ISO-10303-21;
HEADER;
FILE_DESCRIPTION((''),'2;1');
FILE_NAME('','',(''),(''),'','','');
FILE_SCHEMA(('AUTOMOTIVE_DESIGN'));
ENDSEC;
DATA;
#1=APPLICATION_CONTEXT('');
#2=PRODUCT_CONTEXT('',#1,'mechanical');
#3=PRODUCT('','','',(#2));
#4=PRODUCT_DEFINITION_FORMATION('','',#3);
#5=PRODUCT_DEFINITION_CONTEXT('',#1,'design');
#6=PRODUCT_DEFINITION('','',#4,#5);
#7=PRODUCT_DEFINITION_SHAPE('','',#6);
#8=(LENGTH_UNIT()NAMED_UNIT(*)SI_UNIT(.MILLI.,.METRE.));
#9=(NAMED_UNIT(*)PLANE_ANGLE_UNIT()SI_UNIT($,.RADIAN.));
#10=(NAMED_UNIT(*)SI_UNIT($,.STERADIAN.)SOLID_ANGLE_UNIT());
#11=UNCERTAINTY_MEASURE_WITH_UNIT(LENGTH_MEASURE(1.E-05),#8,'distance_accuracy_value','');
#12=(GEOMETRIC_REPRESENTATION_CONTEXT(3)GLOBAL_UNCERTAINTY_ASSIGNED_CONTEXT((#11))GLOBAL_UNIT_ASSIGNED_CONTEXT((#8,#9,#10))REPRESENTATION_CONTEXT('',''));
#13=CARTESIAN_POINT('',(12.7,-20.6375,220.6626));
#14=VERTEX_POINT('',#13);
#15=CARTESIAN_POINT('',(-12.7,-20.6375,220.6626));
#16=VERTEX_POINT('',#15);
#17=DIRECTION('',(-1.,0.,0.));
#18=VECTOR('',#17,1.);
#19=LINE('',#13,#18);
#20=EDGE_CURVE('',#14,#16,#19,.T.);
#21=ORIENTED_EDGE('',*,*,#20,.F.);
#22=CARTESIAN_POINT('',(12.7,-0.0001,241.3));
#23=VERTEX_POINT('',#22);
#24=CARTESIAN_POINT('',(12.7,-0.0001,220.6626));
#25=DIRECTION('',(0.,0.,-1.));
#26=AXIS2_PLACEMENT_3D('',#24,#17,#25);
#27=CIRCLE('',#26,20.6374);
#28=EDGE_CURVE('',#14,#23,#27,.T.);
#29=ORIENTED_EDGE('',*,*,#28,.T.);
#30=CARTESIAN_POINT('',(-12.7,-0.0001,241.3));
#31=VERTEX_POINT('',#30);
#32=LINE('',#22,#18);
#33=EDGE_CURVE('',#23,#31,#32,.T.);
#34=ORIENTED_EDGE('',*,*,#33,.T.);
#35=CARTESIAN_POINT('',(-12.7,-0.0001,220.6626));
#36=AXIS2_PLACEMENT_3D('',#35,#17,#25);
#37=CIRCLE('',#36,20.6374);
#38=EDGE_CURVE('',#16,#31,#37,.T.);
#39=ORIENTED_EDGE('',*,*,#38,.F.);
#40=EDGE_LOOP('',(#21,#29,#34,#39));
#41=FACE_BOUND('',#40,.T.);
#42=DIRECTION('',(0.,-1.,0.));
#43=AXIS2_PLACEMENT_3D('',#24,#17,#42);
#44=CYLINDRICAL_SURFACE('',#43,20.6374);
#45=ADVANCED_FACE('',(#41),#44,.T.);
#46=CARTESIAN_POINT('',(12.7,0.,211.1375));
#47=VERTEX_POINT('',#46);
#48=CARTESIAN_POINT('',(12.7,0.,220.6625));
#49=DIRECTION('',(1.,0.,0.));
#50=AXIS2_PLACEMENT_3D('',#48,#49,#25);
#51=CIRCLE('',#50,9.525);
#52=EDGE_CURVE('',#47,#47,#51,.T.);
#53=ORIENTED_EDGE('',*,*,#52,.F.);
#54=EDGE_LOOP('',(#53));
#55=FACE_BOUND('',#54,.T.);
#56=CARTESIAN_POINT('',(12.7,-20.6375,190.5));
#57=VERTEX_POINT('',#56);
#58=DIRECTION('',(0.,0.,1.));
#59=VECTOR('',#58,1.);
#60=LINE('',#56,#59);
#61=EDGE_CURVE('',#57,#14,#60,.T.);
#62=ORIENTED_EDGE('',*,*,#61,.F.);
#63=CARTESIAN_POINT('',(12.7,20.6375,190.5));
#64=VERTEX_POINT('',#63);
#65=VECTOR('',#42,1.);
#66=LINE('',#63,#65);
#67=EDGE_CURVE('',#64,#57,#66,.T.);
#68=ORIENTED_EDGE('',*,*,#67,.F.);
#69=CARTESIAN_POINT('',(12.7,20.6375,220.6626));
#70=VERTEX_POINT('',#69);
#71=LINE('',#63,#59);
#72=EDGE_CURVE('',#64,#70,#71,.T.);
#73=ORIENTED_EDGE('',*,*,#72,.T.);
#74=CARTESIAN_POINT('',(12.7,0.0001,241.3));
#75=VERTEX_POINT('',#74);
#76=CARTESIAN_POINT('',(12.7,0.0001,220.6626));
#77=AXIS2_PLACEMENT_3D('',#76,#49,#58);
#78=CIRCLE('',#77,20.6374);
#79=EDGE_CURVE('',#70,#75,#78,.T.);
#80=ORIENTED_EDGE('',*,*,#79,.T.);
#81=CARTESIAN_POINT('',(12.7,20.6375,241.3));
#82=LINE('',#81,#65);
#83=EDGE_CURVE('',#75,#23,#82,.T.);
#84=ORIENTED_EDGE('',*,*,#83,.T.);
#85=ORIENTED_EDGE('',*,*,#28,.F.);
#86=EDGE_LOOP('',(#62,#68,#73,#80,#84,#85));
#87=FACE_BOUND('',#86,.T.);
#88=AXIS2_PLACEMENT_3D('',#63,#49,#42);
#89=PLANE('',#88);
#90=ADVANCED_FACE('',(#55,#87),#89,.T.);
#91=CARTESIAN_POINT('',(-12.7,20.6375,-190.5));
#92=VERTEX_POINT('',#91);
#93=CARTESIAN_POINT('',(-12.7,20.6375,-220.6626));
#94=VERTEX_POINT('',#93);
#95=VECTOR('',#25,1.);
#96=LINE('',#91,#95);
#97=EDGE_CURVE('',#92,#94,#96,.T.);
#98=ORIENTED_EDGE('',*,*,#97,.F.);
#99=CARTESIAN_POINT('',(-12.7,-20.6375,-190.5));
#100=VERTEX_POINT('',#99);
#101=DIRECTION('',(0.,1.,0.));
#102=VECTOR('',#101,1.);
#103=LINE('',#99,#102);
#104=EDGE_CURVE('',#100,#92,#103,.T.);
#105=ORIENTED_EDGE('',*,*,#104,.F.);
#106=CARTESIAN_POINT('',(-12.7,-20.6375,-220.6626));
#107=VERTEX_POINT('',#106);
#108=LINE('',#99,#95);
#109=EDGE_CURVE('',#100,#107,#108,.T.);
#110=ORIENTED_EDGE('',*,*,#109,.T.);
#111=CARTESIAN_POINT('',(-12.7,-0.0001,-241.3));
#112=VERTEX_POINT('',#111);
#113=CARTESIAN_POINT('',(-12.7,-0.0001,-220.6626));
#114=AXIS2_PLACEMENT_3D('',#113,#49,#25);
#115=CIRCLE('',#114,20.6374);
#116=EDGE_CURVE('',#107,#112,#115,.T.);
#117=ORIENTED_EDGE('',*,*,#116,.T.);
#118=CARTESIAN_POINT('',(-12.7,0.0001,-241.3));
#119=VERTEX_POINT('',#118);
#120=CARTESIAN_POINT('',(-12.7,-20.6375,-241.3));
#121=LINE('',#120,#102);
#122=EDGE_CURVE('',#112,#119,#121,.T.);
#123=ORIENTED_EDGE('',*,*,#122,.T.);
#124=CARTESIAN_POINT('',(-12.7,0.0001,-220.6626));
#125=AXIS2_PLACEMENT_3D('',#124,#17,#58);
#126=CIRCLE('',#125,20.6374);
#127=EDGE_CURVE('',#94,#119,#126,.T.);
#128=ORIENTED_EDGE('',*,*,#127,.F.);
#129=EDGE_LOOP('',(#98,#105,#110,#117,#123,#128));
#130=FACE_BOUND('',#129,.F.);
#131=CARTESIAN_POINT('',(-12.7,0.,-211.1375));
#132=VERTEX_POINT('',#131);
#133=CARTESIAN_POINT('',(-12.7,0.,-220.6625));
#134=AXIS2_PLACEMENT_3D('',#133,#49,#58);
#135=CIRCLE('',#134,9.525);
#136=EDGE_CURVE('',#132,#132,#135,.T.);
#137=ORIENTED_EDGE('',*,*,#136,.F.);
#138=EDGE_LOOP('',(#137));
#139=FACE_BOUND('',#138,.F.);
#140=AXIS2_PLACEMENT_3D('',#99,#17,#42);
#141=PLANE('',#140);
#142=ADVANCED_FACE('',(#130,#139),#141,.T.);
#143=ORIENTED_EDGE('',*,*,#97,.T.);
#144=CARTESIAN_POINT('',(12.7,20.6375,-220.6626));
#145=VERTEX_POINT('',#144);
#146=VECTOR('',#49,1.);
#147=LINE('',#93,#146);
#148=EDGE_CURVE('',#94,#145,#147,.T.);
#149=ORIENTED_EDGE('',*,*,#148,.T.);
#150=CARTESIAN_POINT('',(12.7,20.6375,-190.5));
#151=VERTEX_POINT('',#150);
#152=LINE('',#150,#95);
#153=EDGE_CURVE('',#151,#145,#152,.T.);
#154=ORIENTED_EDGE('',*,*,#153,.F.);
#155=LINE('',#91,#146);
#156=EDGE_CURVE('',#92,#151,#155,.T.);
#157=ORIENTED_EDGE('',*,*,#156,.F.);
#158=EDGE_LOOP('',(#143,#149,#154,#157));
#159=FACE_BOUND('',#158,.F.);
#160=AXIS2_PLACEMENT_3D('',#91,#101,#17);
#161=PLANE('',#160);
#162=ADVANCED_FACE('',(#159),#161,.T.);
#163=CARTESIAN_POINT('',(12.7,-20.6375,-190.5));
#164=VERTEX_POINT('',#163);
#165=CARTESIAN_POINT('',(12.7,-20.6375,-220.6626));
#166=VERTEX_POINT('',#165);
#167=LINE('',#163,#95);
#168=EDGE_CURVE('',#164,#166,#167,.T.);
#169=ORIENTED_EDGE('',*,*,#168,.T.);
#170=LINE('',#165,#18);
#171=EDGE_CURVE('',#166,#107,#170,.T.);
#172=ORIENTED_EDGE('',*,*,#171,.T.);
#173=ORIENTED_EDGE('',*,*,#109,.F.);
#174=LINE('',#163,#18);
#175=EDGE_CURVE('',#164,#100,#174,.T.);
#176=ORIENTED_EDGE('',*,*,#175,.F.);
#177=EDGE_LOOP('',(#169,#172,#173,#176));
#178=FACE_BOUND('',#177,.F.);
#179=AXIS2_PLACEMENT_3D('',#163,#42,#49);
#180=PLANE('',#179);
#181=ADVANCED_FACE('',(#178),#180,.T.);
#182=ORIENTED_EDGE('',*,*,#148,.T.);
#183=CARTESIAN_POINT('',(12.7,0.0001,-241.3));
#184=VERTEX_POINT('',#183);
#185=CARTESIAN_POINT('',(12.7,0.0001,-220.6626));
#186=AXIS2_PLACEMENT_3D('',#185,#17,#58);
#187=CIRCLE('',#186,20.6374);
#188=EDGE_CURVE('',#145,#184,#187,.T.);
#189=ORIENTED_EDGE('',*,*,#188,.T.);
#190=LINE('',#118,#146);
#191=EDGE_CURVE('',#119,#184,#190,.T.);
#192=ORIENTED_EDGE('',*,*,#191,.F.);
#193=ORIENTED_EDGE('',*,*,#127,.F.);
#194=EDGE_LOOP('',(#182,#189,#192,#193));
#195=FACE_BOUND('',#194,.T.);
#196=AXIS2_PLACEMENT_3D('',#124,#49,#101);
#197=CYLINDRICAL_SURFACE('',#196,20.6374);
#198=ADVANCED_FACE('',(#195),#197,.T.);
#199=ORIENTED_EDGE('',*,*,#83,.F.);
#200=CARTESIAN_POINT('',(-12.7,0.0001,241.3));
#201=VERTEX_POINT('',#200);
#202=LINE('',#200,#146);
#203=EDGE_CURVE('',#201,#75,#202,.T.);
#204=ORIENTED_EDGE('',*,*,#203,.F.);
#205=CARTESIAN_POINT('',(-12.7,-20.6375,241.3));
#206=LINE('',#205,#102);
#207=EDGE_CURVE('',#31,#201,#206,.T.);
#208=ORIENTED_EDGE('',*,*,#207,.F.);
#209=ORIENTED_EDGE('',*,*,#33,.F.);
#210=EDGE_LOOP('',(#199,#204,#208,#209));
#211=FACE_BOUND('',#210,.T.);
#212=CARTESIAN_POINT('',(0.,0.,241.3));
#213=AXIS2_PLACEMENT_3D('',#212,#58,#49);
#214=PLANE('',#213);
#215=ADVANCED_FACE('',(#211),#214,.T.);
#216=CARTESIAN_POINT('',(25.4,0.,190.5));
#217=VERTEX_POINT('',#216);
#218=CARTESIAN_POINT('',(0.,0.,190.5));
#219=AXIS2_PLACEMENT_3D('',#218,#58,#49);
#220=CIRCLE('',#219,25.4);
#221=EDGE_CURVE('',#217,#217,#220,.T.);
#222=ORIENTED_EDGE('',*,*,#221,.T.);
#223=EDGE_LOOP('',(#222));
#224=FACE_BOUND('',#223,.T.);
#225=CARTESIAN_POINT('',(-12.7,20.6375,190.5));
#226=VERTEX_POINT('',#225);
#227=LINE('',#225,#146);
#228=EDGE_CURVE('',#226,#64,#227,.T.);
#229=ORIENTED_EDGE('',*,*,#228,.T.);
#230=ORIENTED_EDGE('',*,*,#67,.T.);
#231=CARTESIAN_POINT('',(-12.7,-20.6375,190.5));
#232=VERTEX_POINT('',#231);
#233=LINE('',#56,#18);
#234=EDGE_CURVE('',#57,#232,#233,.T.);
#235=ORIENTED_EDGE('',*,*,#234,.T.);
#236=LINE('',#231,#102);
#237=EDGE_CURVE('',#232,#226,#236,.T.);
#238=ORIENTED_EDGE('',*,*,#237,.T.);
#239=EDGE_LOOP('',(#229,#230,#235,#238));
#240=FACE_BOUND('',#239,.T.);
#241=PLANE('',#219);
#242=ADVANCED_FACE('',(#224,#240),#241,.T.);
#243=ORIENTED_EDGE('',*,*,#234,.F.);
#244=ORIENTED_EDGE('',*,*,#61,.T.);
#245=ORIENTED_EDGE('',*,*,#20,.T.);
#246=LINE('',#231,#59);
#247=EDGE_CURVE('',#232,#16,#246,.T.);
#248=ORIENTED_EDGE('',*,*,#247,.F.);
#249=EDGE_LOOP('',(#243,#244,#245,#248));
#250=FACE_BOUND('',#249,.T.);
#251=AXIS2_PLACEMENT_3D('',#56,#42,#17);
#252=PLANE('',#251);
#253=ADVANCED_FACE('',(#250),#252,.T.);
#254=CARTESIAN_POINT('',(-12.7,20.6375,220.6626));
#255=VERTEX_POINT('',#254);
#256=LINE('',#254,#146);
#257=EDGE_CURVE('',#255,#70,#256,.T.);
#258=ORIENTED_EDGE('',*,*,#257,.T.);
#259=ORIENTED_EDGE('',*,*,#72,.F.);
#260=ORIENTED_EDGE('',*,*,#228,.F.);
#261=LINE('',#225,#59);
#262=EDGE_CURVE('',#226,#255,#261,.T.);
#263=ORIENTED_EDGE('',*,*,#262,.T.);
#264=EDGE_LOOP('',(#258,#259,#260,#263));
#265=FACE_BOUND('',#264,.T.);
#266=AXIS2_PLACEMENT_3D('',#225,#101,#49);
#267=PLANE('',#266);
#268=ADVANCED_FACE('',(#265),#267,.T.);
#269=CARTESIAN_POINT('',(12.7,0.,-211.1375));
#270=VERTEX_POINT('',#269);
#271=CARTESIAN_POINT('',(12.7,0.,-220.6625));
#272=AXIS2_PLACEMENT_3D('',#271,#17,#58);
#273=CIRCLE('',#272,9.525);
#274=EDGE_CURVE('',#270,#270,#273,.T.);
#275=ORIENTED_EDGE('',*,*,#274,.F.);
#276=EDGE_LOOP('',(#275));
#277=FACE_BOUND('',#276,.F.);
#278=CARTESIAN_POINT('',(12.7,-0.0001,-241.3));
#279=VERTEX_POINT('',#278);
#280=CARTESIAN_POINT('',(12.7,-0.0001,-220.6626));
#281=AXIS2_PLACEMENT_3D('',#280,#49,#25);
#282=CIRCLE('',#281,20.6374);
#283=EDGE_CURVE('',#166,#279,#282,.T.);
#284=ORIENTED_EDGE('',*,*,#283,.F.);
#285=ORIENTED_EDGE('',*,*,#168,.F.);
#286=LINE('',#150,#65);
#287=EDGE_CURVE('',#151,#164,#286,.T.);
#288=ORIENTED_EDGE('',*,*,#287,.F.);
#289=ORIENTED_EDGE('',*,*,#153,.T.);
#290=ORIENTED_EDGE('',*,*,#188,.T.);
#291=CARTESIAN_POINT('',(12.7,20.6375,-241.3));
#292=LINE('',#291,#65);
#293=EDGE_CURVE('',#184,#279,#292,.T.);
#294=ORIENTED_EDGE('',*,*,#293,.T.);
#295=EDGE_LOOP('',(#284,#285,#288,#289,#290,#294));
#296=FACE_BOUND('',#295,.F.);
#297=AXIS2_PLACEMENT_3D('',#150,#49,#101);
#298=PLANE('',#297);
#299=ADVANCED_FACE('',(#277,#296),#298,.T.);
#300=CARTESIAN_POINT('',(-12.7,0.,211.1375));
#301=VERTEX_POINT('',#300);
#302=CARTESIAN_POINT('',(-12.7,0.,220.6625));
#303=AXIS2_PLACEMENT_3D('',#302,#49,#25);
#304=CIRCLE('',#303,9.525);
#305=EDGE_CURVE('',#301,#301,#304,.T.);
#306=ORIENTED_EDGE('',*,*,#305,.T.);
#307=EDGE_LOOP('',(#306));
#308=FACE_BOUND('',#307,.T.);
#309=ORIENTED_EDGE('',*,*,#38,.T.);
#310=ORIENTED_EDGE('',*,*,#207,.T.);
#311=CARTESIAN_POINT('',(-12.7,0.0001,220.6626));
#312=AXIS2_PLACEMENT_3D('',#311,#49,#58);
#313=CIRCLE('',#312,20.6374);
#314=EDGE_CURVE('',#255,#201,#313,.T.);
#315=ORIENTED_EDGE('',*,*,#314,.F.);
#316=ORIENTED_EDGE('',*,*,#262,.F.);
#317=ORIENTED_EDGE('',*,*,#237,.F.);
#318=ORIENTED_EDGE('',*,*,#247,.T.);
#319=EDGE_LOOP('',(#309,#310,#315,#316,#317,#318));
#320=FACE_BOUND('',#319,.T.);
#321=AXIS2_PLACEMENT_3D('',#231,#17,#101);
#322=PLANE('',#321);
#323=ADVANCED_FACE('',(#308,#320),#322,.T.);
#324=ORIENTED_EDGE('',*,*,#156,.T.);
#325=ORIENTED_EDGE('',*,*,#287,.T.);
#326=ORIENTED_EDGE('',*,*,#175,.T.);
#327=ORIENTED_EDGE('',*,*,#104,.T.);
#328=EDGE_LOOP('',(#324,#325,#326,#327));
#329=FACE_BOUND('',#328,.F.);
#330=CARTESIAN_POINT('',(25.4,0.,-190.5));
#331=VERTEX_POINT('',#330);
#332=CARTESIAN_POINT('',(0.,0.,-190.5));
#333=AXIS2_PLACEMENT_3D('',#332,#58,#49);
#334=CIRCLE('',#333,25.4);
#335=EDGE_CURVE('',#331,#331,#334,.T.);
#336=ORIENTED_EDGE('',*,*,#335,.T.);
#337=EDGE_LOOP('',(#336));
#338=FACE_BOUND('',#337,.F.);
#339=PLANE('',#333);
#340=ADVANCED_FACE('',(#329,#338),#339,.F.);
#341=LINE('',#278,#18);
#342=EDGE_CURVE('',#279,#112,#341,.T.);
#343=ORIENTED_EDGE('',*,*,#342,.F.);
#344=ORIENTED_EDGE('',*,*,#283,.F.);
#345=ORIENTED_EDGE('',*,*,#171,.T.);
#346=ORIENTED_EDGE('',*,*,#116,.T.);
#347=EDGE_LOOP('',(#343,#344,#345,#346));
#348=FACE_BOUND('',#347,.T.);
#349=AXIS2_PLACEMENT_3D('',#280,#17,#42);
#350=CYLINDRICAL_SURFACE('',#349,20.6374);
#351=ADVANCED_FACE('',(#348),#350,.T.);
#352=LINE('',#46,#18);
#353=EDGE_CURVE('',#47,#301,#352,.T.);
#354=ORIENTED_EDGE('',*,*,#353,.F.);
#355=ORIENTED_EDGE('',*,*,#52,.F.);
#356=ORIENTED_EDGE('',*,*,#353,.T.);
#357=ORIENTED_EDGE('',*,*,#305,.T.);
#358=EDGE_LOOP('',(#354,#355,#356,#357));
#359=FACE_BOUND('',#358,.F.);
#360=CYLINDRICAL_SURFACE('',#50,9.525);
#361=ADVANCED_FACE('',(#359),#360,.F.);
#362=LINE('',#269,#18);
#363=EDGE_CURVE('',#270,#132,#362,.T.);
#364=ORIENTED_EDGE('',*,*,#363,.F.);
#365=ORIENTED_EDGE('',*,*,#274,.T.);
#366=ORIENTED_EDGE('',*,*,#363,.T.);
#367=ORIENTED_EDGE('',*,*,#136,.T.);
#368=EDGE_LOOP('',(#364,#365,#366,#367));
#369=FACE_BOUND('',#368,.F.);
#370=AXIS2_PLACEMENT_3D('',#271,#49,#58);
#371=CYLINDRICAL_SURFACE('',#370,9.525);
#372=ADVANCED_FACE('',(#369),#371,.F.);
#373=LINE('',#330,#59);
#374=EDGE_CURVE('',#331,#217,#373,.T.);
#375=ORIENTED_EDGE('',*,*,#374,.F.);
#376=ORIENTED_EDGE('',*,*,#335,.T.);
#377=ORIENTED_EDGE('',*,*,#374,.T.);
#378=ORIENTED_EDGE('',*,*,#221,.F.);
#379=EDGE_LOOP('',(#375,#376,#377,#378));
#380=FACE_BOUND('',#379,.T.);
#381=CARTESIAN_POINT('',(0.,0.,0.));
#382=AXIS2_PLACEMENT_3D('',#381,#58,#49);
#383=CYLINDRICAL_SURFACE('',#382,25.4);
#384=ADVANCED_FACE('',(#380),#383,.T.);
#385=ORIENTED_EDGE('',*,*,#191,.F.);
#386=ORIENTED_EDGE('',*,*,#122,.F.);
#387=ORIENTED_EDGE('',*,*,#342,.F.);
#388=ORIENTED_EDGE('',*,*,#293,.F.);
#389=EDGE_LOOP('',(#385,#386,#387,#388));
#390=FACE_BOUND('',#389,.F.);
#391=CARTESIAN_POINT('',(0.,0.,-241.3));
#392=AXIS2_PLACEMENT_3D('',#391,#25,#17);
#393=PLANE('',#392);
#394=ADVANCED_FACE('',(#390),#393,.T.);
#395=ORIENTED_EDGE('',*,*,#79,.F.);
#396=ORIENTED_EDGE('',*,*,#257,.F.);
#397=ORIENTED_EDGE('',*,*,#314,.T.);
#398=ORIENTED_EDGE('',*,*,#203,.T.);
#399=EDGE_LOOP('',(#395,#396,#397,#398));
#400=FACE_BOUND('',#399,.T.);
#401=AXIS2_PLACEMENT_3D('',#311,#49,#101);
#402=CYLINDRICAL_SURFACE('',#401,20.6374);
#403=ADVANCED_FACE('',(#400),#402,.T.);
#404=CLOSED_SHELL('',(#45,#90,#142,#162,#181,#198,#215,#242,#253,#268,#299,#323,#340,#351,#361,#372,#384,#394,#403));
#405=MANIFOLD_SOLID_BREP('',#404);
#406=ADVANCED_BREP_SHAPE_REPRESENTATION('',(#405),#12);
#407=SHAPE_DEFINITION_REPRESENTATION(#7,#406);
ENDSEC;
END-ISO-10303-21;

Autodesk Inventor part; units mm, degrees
ref_plane "YZ Plane" through (0, 0, 0) normal (1, 0, 0) x (0, 1, 0)
ref_plane "XZ Plane" through (0, 0, 0) normal (0, 1, 0) x (-1, 0, 0)
ref_plane "XY Plane" through (0, 0, 0) normal (0, 0, 1) x (1, 0, 0)
sketch "Sketch1" plane through (0, 0, 0) normal (0, 0, 1) x (1, 0, 0)
  circle A0 centre (0, 0) radius 25.4
  dimension "d0" = 50.8
extrude "Extrusion1" add sketch "Sketch1" along normal mid plane 381
sketch "Sketch4" plane through (0, 0, 190.5) normal (0, 0, 1) x (1, 0, 0)
  line L0 (-12.7, 20.6375) -> (12.7, 20.6375)
  line L1 (12.7, 20.6375) -> (12.7, -20.6375)
  line L2 (12.7, -20.6375) -> (-12.7, -20.6375)
  line L3 (-12.7, -20.6375) -> (-12.7, 20.6375)
  line L4 (-12.7, 20.6375) -> (12.7, -20.6375) construction
  line L5 (12.7, 20.6375) -> (-12.7, -20.6375) construction
  point P0 (0, 0)
  dimension "d15" = 25.4
  dimension "d16" = 41.275
extrude "Extrusion4" add sketch "Sketch4" along normal blind 50.8
fillet "Fillet2" radius 20.6375 2 edges at (0, 20.6375, 241.3) (0, -20.6375, 241.3)
sketch "Sketch5" plane through (12.7, -20.6375, 190.5) normal (1, 0, 0) x (0, 0, -1)
  arc A0 (-30.1625, 41.275) -> (-30.1625, 0) centre (-30.1625, 20.6375) ccw projected
  circle A1 centre (-30.1625, 20.6375) radius 9.525
  point P0 (190.5, 20.6375)
extrude "Extrusion5" cut sketch "Sketch5" against normal blind 50.8
mirror "Mirror1" about plane through (0, 0, 0) normal (0, 0, 1) of "Extrusion4", "Fillet2", "Extrusion5"
properties part number "body to wheel hub connectors (19 in)"
